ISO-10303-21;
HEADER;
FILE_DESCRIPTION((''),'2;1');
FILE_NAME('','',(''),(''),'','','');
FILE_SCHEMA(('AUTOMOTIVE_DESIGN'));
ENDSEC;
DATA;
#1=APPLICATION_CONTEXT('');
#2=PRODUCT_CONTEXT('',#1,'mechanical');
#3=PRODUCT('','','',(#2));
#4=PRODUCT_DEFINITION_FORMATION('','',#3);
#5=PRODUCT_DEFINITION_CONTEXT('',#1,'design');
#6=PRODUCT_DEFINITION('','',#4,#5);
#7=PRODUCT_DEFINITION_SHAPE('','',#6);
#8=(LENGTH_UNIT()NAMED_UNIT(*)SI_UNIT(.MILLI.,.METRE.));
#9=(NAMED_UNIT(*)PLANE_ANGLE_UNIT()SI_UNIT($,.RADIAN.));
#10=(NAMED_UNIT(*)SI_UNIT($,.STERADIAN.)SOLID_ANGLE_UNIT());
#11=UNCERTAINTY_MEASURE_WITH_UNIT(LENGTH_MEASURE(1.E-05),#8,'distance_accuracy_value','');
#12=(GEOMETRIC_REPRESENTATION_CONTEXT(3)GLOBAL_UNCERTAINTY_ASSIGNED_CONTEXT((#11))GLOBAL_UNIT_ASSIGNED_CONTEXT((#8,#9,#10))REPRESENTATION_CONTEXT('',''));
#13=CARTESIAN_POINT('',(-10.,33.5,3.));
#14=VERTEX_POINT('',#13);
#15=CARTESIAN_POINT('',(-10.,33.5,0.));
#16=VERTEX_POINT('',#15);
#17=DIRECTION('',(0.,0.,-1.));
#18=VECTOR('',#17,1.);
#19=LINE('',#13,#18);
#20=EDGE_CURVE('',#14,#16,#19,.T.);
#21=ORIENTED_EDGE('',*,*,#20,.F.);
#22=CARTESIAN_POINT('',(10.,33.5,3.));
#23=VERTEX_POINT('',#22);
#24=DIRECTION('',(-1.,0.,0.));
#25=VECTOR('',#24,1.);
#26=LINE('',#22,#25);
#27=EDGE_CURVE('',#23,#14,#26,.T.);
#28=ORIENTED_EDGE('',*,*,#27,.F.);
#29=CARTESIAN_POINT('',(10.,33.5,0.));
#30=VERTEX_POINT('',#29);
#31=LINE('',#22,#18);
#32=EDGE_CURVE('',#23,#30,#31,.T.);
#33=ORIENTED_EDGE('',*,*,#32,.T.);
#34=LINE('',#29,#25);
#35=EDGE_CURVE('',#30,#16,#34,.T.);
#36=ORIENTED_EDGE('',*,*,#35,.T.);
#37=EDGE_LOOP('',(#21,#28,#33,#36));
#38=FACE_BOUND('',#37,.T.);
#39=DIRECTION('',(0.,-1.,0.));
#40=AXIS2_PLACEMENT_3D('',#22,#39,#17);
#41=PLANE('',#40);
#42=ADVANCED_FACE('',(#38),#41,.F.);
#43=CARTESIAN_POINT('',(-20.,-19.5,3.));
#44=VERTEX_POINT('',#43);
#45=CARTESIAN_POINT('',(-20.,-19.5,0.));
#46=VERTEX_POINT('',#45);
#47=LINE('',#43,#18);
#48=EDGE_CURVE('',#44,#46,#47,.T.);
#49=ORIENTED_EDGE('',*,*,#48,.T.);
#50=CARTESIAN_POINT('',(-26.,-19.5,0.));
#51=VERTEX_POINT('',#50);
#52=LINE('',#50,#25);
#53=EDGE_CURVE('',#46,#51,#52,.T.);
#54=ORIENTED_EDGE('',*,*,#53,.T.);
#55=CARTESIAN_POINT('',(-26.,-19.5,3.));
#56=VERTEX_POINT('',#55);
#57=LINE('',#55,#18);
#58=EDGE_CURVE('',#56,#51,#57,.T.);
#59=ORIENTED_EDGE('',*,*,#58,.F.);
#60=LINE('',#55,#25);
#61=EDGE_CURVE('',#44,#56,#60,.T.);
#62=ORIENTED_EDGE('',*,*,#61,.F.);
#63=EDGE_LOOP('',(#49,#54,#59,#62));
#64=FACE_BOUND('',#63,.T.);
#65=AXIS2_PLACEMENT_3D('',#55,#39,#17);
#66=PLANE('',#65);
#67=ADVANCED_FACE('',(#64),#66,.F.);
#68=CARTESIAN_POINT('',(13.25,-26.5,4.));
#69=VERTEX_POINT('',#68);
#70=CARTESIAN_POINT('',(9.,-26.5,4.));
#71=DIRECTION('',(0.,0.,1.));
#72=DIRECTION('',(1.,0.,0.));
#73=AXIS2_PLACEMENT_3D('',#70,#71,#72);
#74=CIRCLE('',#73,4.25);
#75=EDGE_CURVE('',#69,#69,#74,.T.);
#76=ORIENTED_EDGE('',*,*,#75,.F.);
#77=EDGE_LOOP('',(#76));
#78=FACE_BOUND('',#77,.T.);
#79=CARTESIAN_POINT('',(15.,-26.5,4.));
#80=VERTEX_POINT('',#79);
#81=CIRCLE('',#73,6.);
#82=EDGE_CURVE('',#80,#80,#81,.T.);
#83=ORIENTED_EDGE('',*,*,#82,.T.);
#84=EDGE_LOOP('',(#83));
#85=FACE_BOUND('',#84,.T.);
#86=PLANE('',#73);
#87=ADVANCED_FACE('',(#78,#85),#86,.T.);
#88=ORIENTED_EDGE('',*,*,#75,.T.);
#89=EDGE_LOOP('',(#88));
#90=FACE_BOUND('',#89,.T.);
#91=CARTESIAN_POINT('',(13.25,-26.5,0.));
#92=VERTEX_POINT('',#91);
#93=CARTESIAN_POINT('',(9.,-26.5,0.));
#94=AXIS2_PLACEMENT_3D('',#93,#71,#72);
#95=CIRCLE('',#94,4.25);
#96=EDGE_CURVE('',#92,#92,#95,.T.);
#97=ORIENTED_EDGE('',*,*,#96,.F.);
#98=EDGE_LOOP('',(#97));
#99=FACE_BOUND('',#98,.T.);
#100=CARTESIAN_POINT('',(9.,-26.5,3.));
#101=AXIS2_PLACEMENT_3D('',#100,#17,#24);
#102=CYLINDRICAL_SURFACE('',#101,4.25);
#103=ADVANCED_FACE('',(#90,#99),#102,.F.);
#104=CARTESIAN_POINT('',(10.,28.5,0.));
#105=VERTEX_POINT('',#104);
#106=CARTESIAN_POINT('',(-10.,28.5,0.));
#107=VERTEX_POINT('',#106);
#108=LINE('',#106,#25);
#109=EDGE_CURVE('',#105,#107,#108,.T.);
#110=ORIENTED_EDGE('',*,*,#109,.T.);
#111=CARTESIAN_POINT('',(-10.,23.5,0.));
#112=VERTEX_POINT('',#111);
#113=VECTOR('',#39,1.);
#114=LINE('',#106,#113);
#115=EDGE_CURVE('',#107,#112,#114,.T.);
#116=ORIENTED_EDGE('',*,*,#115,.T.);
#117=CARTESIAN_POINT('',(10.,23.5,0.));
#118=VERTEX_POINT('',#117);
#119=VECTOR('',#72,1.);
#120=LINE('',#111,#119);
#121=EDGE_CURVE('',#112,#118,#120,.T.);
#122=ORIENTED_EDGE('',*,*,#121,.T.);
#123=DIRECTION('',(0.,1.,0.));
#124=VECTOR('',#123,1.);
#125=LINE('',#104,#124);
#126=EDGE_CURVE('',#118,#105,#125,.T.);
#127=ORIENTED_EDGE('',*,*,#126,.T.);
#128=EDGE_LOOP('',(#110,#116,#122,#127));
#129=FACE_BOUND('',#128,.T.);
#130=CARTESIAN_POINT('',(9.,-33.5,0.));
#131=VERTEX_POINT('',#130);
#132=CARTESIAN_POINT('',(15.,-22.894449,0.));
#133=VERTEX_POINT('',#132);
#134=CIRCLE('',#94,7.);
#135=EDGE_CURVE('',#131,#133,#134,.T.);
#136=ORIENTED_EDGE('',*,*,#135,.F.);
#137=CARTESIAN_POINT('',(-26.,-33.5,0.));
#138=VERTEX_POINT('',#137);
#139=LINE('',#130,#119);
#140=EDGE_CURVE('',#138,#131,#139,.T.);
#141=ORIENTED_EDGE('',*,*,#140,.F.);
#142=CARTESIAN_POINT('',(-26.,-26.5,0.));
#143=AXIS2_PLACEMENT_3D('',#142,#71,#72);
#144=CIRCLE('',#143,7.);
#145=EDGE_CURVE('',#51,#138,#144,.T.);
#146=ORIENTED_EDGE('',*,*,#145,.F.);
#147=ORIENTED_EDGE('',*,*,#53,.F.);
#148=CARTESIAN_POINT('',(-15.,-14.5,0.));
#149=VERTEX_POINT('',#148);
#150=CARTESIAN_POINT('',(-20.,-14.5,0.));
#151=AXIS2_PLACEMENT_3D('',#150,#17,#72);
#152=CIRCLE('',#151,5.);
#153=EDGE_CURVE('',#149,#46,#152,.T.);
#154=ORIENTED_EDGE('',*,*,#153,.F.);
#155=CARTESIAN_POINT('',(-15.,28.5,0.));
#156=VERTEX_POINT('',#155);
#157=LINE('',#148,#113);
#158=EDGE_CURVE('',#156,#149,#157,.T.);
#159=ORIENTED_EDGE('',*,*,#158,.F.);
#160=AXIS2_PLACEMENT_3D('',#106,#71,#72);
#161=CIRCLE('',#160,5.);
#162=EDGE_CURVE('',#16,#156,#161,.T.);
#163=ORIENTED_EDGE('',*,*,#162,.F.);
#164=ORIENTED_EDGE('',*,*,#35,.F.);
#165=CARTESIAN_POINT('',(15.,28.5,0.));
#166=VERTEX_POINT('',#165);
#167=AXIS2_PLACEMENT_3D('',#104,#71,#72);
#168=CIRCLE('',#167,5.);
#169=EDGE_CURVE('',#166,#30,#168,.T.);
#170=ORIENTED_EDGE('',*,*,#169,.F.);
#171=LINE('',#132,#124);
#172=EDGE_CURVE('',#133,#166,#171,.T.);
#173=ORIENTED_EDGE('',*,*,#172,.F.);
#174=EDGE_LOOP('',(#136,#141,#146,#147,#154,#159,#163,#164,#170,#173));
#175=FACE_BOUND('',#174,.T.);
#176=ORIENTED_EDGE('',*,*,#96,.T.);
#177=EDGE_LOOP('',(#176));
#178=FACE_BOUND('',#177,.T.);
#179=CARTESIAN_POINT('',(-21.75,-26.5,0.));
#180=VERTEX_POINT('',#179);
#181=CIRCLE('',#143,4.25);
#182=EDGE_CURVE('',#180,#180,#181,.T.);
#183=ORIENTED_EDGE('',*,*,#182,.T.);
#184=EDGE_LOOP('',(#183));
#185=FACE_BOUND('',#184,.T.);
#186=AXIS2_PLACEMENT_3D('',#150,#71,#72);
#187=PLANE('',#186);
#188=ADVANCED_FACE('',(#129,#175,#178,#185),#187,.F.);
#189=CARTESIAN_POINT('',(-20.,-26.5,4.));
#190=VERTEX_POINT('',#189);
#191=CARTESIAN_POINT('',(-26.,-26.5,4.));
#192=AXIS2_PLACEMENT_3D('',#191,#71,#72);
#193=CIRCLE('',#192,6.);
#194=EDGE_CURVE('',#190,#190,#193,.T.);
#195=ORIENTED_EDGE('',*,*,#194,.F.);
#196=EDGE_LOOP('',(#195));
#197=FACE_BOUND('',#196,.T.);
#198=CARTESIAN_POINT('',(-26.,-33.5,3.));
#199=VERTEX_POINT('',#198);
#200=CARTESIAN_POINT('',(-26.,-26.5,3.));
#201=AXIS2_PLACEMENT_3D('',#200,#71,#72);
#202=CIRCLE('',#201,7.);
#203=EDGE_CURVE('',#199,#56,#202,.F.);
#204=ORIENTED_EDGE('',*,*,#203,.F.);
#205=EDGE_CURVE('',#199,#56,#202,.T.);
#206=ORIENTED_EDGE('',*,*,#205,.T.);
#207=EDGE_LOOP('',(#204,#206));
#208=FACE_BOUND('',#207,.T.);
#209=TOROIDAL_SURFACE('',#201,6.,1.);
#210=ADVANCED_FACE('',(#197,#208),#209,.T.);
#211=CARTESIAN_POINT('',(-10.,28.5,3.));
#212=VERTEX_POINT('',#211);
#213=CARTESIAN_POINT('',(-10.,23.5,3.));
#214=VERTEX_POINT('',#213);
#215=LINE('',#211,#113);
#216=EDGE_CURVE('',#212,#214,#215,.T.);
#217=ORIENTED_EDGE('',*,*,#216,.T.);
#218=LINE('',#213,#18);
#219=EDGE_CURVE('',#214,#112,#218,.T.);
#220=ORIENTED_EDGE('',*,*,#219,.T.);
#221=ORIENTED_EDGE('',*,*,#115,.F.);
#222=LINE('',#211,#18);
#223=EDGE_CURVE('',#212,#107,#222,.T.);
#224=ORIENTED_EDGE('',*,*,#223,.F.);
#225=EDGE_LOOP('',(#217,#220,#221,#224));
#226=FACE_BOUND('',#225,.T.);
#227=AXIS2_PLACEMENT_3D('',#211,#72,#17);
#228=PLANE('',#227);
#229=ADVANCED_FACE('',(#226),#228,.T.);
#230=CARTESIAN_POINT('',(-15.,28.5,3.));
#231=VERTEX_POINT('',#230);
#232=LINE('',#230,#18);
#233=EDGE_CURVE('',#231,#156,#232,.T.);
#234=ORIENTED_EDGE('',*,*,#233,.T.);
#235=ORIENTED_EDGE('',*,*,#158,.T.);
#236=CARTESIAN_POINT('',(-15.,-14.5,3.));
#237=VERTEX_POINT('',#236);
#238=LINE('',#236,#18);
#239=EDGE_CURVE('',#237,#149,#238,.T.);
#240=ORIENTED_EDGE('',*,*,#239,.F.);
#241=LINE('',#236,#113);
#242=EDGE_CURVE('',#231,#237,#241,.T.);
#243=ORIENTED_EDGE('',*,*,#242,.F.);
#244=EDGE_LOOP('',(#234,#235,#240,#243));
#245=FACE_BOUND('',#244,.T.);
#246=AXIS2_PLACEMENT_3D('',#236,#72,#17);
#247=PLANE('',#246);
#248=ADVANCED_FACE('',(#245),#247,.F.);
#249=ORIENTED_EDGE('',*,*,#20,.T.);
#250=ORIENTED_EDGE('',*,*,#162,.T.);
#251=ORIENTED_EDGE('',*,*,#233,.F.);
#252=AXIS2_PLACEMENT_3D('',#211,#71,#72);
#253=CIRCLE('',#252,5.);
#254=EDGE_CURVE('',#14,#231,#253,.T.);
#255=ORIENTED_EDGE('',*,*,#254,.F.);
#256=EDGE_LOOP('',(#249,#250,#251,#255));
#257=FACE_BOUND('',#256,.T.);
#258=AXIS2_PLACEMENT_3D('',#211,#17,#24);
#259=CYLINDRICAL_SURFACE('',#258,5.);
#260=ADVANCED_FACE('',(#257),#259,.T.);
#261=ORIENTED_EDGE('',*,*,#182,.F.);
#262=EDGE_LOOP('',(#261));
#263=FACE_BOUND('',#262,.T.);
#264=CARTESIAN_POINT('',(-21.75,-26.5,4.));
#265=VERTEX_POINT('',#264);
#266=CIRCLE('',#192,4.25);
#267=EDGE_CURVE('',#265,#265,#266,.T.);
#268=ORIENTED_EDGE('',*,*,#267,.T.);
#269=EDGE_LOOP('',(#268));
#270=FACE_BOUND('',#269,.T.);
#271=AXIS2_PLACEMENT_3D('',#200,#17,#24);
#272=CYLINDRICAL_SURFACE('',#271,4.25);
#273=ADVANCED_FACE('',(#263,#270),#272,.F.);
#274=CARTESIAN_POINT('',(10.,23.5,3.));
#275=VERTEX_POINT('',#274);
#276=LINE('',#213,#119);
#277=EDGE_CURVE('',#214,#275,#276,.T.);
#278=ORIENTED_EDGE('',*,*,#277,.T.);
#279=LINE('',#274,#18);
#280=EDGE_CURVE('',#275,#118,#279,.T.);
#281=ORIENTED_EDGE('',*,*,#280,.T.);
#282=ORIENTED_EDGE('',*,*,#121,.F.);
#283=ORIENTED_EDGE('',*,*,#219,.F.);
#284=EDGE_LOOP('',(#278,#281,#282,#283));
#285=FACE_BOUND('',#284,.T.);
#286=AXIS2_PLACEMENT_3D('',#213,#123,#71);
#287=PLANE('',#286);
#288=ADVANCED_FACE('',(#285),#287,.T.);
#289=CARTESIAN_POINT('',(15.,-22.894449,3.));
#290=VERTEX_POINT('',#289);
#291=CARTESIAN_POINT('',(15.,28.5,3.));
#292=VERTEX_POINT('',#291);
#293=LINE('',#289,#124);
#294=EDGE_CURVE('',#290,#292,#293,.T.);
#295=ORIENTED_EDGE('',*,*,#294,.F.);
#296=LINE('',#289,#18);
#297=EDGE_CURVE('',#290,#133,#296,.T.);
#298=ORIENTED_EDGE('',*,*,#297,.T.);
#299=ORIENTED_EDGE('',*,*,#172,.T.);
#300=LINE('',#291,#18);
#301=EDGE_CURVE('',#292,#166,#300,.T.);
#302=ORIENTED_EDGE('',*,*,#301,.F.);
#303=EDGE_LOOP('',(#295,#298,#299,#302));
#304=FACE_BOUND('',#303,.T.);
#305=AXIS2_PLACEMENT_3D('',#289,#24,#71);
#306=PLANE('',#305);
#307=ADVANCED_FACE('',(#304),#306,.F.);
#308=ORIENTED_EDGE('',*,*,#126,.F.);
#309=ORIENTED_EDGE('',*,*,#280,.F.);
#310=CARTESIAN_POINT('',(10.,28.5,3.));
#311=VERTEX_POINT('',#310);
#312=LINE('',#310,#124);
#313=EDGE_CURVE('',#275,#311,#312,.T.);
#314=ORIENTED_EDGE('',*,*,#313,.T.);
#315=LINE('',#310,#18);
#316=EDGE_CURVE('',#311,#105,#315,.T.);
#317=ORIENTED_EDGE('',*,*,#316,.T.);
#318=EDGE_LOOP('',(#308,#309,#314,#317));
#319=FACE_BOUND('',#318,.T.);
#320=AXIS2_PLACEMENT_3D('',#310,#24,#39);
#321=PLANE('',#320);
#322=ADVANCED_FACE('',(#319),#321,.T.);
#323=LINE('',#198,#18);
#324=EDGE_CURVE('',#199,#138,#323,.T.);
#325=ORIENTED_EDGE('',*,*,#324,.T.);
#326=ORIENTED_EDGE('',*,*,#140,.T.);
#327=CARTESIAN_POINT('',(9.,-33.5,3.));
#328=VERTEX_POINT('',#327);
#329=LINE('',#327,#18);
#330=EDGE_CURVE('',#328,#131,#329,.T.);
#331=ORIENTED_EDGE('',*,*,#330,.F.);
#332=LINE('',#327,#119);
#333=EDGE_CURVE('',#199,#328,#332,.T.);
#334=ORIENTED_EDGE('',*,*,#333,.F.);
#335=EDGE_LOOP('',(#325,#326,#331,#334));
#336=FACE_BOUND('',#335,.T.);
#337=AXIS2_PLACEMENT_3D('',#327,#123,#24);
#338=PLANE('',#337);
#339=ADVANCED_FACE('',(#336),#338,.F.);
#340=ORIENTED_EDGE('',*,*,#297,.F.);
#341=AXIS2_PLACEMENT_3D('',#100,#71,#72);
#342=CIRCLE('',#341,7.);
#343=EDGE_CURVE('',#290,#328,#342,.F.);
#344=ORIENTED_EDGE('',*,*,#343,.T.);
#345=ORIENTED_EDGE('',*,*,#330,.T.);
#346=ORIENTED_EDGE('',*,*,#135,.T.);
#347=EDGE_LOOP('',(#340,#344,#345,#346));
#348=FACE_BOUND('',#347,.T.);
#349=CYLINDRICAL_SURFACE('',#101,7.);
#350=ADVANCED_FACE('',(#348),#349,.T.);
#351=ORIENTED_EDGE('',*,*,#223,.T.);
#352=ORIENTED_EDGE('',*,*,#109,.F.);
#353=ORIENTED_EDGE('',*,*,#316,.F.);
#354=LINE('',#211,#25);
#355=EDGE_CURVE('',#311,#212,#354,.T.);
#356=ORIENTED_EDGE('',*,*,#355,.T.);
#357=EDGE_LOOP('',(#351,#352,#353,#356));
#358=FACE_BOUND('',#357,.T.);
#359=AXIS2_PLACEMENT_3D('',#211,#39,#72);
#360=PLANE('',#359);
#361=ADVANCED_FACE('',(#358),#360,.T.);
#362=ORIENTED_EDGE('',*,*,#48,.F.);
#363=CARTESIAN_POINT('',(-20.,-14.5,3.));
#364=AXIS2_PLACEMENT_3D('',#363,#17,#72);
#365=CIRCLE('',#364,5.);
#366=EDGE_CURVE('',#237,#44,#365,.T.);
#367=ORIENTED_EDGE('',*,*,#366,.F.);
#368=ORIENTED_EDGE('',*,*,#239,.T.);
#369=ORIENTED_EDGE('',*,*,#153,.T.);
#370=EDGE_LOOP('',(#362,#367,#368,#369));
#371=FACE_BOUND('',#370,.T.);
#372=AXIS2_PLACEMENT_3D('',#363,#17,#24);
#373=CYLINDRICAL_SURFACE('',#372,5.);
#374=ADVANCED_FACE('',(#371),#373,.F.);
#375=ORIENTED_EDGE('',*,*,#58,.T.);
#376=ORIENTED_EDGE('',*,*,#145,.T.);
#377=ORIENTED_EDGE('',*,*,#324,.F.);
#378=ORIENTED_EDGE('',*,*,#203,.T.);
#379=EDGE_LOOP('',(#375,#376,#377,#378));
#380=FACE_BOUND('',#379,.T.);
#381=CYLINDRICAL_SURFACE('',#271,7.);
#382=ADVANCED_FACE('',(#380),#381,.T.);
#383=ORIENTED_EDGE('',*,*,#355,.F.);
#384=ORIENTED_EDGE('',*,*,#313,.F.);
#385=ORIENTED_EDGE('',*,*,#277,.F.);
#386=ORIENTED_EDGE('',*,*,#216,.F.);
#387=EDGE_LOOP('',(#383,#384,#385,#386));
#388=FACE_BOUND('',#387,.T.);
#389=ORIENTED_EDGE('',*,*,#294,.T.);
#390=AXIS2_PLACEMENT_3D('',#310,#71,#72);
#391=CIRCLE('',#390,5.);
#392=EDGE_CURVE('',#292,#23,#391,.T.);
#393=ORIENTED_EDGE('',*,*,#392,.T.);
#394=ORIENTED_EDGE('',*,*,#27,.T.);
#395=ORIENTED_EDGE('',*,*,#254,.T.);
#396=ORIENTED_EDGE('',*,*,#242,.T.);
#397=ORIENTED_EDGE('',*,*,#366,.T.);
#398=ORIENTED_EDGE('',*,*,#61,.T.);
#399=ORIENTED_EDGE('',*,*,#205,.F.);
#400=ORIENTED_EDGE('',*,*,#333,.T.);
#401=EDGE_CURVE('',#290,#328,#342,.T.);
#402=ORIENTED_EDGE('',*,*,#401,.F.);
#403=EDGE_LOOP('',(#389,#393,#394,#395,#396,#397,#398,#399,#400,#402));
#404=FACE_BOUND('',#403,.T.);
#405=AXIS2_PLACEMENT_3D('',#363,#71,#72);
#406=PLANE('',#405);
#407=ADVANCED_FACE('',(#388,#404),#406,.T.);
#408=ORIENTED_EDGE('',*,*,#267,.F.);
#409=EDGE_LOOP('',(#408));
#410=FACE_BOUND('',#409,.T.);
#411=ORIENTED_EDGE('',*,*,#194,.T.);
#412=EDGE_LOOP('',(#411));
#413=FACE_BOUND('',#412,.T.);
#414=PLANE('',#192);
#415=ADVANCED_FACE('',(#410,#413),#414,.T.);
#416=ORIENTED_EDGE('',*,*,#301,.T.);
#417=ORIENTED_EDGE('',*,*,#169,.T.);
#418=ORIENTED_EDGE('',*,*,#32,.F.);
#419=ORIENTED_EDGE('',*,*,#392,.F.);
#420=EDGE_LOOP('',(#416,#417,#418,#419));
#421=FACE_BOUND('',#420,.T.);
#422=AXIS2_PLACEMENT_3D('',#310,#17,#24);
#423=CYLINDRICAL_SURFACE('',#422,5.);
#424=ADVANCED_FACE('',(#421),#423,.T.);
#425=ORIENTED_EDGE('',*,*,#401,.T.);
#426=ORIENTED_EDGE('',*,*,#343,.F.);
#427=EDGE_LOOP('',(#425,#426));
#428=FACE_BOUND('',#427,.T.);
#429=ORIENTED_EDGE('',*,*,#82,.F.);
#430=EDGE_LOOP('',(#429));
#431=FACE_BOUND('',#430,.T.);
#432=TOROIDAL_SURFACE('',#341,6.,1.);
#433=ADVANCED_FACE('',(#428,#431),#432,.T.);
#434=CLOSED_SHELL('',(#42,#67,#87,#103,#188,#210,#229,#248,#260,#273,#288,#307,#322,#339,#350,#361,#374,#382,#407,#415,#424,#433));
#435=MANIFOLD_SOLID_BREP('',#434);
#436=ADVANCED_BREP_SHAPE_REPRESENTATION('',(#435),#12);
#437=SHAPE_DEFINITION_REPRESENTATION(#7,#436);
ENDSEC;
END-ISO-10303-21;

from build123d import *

# Parameters (mm, degrees)
SKETCH1_R           = 4.25
SKETCH1_W           = 20
SKETCH1_H           = 5
BOSS_EXTRUDE1_DEPTH = 3
SKETCH2_R           = 7
SKETCH2_R_2         = 4.25
BOSS_EXTRUDE2_DEPTH = 1
FILLET1_R           = 1


with BuildPart() as part:
    # Sketch1 → Boss-Extrude1 (new body)
    with BuildSketch(Plane.XY):
        with BuildLine():
            Line((9, -33.5), (-26, -33.5))
            ThreePointArc((-26, -33.5), (-33, -26.5), (-26, -19.5))
            Line((-26, -19.5), (-20, -19.5))
            ThreePointArc((-20, -19.5), (-16.464466094, -18.035533906), (-15, -14.5))
            Line((-15, -14.5), (-15, 28.5))
            ThreePointArc((-15, 28.5), (-13.535533906, 32.035533906), (-10, 33.5))
            Line((-10, 33.5), (10, 33.5))
            ThreePointArc((10, 33.5), (13.535533906, 32.035533906), (15, 28.5))
            Line((15, 28.5), (15, -22.894448725))
            ThreePointArc((15, -22.894448725), (15.092571663, -29.946820352), (9, -33.5))
        make_face()
        with Locations((9, -26.5)):
            Circle(SKETCH1_R, mode=Mode.SUBTRACT)
        with Locations((-26, -26.5)):
            Circle(SKETCH1_R, mode=Mode.SUBTRACT)
        with Locations((0, 26)):
            Rectangle(SKETCH1_W, SKETCH1_H, mode=Mode.SUBTRACT)
    extrude(amount=BOSS_EXTRUDE1_DEPTH)

    # Sketch2 → Boss-Extrude2 (add)
    # profile 1 of 2: a face of its own
    with BuildSketch(Plane.XY.offset(3)):
        with Locations(Location((-26, -26.5, 0), (0, 0, 270))):
            Circle(SKETCH2_R)
        with Locations((-26, -26.5)):
            Circle(SKETCH2_R_2, mode=Mode.SUBTRACT)
    # profile 2 of 2: a face of its own
    with BuildSketch(Plane.XY.offset(3)):
        with Locations(Location((9, -26.5, 0), (0, 0, 270))):
            Circle(SKETCH2_R)
        with Locations((9, -26.5)):
            Circle(SKETCH2_R_2, mode=Mode.SUBTRACT)
    extrude(amount=BOSS_EXTRUDE2_DEPTH)

    # Fillet1
    fillet1_edges = [part.edges().sort_by_distance(p)[0] for p in [
        (-26, -19.5, 4),
        (9, -19.5, 4),
    ]]
    fillet(fillet1_edges, radius=FILLET1_R - 0.0001)  # a hair under: the kernel refuses the full size


solid = part.part
